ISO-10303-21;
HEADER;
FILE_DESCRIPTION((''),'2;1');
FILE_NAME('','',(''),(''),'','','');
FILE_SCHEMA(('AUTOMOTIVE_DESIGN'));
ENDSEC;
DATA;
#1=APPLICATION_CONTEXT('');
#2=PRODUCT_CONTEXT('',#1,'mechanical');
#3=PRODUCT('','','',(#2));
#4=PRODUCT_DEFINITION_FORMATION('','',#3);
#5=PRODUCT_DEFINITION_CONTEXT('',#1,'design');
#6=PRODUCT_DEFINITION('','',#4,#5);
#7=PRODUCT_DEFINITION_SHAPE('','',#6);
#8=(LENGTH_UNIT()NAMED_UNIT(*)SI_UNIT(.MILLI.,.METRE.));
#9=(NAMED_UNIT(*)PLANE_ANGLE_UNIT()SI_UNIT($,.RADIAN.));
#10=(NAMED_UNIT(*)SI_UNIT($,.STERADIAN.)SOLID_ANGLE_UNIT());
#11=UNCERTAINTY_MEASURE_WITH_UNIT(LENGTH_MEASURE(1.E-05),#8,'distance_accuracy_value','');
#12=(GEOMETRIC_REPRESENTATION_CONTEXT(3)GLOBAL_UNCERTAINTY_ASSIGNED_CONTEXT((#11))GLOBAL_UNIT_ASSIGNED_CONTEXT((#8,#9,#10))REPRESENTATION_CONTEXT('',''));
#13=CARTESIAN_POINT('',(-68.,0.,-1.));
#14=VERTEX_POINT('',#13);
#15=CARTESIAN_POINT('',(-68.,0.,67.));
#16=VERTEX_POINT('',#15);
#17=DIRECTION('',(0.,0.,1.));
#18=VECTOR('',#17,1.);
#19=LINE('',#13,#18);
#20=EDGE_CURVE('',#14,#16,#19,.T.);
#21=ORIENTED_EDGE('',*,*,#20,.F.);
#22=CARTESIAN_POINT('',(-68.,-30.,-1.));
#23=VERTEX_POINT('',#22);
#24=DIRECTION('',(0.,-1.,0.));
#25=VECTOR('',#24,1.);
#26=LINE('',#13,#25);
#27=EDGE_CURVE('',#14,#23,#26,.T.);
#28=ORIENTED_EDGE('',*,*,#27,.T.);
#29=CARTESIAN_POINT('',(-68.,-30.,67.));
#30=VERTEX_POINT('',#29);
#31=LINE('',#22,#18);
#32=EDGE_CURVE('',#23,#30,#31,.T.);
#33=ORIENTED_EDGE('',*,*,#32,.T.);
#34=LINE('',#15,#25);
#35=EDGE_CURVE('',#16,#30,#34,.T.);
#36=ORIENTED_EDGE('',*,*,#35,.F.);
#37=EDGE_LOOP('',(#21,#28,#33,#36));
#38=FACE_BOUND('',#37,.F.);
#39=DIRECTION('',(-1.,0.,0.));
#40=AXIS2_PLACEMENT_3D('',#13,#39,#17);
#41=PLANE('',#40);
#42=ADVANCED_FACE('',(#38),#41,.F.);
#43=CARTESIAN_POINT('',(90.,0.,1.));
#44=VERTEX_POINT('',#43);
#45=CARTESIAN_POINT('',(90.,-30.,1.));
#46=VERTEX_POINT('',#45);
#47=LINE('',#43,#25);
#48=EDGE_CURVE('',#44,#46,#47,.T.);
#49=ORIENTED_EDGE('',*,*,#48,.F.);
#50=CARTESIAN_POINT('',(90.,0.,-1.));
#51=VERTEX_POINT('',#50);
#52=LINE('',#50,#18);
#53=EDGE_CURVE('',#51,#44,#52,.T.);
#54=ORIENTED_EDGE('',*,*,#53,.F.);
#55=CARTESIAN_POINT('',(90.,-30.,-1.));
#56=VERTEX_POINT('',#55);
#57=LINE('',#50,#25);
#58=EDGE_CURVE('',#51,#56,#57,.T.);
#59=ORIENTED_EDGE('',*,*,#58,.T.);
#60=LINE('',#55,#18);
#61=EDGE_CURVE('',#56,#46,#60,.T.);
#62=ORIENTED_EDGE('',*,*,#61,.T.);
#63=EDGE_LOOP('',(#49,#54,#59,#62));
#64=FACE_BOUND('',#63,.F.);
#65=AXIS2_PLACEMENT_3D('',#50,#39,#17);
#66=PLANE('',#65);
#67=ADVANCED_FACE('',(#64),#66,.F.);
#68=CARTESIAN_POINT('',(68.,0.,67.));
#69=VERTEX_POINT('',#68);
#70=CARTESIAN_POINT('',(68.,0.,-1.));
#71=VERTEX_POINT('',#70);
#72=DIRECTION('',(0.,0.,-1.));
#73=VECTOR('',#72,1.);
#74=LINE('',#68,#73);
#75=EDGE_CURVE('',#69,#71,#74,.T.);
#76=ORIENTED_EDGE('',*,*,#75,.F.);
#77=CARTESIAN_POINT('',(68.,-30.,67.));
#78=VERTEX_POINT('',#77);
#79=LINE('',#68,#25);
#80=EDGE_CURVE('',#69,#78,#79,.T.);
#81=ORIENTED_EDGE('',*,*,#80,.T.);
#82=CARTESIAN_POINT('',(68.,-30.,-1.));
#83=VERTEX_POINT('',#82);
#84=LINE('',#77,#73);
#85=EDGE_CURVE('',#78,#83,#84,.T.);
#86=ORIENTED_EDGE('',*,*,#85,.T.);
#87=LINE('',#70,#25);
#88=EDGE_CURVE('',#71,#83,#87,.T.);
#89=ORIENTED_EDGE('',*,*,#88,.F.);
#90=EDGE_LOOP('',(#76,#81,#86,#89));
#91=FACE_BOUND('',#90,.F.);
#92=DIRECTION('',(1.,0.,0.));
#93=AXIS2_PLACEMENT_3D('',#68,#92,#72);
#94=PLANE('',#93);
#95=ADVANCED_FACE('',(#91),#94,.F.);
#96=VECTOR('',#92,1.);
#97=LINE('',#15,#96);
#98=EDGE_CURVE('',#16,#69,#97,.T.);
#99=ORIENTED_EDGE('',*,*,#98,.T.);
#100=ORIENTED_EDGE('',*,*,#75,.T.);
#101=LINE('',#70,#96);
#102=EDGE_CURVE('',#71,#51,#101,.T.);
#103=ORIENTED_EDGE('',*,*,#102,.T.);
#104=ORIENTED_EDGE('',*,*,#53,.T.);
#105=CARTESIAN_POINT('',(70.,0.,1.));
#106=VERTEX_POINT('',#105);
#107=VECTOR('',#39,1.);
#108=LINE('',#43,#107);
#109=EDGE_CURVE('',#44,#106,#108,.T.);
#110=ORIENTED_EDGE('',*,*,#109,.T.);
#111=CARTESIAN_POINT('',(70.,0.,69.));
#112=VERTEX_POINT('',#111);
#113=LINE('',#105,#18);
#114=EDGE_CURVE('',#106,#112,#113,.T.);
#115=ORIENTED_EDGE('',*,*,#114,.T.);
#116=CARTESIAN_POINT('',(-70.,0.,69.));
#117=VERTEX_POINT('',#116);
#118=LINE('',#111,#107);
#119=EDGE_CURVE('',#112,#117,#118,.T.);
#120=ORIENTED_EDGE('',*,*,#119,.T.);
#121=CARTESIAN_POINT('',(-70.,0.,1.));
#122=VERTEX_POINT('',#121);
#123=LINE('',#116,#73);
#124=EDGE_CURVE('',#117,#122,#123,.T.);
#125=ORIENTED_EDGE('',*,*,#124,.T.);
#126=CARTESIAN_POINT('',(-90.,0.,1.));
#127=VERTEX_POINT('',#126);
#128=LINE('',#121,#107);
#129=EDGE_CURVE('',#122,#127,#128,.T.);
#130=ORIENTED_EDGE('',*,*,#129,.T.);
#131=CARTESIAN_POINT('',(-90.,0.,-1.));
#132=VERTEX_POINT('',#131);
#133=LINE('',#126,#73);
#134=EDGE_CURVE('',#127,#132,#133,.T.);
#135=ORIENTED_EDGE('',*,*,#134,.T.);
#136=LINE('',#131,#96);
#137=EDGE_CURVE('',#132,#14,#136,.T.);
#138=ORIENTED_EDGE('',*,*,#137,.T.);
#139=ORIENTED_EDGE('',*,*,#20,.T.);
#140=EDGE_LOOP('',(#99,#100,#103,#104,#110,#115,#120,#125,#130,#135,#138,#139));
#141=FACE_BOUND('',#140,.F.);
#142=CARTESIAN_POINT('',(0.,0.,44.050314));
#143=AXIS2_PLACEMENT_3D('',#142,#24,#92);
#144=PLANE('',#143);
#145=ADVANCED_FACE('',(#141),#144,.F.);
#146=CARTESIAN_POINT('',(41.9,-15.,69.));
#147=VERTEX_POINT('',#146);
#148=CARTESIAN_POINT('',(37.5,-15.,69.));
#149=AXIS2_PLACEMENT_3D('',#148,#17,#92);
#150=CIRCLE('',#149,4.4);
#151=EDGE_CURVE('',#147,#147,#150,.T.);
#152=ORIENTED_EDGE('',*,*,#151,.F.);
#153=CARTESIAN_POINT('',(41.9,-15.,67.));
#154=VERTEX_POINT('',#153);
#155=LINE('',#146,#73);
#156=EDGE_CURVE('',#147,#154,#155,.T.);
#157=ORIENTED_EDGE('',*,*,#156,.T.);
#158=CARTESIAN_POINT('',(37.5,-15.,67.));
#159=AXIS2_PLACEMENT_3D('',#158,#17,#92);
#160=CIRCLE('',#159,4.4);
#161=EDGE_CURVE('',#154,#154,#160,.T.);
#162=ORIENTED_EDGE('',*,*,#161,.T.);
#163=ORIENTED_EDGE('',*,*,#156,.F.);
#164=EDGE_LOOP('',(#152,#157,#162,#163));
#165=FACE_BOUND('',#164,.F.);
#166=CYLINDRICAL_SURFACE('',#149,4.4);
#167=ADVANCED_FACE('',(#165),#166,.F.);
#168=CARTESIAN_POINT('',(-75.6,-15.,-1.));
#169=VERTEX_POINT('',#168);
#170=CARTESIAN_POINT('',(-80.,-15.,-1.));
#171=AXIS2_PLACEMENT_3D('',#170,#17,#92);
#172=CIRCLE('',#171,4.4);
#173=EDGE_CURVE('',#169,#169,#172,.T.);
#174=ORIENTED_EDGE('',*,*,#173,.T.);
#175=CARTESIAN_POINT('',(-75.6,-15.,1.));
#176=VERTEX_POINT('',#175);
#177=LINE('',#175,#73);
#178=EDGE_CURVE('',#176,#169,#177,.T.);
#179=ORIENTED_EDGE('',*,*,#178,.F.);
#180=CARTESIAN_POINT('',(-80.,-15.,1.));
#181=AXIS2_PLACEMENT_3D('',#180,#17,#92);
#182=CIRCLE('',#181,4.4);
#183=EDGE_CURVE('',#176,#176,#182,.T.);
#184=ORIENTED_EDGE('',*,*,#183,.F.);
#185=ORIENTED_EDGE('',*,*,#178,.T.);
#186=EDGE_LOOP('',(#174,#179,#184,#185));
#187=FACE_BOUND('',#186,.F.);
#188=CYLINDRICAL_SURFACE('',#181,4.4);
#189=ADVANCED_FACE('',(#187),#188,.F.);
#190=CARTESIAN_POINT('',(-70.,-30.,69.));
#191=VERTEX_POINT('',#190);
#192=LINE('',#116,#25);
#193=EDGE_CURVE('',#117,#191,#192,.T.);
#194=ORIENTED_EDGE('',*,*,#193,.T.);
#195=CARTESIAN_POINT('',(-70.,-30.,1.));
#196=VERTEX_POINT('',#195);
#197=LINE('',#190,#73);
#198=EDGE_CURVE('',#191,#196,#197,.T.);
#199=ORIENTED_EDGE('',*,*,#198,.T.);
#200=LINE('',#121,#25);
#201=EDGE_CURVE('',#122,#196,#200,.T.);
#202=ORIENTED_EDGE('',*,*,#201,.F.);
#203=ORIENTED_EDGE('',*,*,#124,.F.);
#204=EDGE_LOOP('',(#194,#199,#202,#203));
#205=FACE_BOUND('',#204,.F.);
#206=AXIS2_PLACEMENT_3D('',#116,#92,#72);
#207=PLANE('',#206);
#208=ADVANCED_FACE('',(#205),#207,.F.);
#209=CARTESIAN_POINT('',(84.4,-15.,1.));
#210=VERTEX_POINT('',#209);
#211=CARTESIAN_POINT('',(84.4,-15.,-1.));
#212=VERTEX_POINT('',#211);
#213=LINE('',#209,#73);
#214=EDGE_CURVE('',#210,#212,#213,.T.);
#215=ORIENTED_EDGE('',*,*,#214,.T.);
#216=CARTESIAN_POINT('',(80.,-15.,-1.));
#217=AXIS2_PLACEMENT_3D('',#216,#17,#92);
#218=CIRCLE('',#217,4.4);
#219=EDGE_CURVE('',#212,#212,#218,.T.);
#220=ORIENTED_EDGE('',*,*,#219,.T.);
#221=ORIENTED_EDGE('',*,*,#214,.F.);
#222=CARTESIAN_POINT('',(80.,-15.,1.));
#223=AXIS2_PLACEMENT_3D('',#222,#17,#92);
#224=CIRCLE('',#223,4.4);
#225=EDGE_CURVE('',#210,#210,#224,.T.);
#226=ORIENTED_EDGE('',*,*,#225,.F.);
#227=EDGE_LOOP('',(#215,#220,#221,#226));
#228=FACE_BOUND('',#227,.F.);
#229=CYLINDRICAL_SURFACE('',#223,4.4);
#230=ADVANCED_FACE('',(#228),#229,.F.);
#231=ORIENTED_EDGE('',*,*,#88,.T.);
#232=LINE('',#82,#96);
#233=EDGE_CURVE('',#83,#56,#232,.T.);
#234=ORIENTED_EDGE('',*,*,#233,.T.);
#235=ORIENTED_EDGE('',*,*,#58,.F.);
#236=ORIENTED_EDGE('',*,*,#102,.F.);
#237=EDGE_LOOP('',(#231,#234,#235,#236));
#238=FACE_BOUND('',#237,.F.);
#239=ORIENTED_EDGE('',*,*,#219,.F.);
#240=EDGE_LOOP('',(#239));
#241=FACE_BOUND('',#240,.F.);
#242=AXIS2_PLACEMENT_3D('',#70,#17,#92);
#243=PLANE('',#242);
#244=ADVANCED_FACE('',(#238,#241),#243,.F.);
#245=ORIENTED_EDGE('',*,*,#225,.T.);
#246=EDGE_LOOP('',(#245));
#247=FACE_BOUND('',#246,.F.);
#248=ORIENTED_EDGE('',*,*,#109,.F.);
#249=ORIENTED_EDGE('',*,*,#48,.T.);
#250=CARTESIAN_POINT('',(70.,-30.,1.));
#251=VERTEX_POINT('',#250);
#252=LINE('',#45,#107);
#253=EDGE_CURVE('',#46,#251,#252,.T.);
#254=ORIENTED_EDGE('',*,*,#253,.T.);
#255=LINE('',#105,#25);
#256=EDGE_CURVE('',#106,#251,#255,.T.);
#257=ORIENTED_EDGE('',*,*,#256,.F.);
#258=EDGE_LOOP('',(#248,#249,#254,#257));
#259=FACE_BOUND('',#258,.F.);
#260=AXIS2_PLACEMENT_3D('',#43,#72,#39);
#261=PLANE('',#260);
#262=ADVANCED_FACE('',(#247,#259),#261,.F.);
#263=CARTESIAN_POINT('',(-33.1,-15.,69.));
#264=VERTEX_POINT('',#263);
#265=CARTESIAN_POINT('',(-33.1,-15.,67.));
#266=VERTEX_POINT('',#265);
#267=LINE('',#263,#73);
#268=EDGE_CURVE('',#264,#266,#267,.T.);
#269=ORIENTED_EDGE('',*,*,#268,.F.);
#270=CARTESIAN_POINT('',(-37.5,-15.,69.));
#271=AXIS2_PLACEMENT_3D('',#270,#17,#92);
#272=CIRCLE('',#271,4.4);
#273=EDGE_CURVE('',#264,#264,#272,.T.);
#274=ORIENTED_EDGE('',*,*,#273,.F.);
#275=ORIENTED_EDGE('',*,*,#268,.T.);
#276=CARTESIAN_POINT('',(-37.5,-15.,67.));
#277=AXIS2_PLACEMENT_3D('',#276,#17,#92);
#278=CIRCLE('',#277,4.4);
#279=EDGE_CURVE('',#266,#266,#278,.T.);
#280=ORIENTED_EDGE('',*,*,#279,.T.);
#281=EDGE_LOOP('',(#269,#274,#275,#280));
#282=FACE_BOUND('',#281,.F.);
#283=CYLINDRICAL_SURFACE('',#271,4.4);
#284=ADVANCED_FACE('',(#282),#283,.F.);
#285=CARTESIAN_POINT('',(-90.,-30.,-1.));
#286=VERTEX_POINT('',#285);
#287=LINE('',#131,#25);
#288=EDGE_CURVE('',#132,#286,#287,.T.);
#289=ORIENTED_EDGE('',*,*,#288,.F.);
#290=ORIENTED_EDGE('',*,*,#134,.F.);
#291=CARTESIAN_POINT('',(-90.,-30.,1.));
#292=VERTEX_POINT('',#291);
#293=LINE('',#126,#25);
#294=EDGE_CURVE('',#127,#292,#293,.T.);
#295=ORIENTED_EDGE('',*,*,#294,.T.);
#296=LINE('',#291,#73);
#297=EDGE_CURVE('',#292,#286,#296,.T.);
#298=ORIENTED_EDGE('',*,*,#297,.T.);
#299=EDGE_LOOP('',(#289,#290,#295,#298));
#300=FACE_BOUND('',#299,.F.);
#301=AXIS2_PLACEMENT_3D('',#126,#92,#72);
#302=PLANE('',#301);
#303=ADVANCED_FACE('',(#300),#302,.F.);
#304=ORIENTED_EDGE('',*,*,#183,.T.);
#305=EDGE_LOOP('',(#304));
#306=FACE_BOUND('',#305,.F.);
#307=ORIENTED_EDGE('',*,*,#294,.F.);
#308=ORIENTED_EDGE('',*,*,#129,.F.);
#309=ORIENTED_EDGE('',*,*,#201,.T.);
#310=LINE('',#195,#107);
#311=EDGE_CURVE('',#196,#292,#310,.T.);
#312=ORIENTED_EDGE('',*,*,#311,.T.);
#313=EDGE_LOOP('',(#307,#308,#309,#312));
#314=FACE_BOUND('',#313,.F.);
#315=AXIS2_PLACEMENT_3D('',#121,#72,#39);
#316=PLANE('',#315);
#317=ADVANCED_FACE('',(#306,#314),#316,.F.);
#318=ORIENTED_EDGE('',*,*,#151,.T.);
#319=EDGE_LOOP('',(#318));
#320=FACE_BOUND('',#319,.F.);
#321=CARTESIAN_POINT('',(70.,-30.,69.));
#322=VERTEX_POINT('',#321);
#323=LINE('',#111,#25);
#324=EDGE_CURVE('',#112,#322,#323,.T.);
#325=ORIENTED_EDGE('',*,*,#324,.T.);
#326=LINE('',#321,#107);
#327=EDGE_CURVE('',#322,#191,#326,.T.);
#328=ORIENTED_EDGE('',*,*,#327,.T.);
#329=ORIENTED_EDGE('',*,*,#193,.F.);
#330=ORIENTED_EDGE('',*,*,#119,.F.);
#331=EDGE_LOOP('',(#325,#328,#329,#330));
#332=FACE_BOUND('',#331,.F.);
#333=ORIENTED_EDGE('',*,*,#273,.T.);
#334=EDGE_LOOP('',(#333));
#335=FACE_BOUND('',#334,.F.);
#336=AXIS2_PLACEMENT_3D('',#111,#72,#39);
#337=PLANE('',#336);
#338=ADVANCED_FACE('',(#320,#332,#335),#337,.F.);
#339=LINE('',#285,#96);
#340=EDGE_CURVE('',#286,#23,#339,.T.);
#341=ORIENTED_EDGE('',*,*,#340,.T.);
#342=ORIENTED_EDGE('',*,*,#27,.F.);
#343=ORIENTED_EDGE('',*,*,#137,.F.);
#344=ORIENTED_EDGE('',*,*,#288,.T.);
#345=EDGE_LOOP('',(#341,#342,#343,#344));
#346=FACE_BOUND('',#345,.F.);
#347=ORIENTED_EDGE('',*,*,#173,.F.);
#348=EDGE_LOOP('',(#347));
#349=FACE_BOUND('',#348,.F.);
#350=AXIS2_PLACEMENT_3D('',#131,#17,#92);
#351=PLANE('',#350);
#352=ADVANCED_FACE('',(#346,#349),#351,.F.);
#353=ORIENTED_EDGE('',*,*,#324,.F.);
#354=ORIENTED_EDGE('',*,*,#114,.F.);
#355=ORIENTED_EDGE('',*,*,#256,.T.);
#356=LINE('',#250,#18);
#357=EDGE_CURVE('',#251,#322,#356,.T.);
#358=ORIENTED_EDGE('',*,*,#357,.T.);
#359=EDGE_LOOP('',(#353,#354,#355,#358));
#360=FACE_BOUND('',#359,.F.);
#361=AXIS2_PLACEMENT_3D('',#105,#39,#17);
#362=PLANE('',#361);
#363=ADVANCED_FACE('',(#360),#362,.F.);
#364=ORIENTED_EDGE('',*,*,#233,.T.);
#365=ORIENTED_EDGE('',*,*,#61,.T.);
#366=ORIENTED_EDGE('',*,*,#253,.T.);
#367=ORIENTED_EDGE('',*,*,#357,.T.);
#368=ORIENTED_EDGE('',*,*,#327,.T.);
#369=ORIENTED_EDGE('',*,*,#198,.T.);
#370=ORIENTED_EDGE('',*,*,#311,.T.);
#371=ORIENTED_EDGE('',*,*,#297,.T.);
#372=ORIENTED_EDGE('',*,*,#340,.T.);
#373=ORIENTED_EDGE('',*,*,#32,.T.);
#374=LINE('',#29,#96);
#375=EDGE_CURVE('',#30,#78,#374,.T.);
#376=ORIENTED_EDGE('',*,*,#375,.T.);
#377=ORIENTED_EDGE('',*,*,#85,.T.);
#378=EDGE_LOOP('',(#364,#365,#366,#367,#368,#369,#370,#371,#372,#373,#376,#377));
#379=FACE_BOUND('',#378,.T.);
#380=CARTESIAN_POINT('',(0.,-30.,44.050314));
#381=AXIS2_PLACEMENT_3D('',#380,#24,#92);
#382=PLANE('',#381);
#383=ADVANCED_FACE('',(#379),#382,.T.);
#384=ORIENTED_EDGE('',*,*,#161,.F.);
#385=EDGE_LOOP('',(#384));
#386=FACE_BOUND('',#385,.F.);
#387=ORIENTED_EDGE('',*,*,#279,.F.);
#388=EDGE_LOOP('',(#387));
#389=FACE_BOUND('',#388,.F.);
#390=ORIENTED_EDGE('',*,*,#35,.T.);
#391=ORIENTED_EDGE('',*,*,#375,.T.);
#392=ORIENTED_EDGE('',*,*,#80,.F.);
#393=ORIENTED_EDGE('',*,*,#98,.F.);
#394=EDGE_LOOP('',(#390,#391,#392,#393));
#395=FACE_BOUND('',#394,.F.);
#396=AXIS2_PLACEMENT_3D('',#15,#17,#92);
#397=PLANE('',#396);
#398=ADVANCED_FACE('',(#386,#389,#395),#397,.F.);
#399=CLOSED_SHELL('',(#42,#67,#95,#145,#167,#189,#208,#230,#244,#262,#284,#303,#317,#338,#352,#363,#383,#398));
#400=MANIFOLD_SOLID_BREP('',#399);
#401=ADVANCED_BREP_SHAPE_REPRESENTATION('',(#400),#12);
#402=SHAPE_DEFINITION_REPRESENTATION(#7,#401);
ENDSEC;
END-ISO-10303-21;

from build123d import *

# Parameters (mm, degrees)
F1_DEPTH = 30
F2_R     = 4.4
F3_R     = 4.4
F4_DEPTH = 25


# Not quite as in the source:
# - a feature names something its author has since deleted; it is built from what else it names


with BuildPart() as f1:
    # F0 (on Front) → F1 (new body)
    with BuildSketch(Plane.XZ):
        Polygon((90, -1), (90, 1), (70, 1), (70, 69), (-70, 69), (-70, 1), (-90, 1), (-90, -1), (-68, -1), (-68, 67), (68, 67), (68, -1), align=None)
    extrude(amount=F1_DEPTH)

    # F2 (on face) + F3 (on face) → F4 (cut)
    with BuildSketch(Plane.XY.offset(1)):
        with Locations((-80, -15)):
            Circle(F2_R)
        with Locations((80, -15)):
            Circle(F2_R)
    with BuildSketch(Plane.XY.offset(69)):
        with Locations((-37.5, -15)):
            Circle(F3_R)
        with Locations((37.5, -15)):
            Circle(F3_R)
    extrude(amount=-F4_DEPTH, mode=Mode.SUBTRACT)


solid = f1.part
